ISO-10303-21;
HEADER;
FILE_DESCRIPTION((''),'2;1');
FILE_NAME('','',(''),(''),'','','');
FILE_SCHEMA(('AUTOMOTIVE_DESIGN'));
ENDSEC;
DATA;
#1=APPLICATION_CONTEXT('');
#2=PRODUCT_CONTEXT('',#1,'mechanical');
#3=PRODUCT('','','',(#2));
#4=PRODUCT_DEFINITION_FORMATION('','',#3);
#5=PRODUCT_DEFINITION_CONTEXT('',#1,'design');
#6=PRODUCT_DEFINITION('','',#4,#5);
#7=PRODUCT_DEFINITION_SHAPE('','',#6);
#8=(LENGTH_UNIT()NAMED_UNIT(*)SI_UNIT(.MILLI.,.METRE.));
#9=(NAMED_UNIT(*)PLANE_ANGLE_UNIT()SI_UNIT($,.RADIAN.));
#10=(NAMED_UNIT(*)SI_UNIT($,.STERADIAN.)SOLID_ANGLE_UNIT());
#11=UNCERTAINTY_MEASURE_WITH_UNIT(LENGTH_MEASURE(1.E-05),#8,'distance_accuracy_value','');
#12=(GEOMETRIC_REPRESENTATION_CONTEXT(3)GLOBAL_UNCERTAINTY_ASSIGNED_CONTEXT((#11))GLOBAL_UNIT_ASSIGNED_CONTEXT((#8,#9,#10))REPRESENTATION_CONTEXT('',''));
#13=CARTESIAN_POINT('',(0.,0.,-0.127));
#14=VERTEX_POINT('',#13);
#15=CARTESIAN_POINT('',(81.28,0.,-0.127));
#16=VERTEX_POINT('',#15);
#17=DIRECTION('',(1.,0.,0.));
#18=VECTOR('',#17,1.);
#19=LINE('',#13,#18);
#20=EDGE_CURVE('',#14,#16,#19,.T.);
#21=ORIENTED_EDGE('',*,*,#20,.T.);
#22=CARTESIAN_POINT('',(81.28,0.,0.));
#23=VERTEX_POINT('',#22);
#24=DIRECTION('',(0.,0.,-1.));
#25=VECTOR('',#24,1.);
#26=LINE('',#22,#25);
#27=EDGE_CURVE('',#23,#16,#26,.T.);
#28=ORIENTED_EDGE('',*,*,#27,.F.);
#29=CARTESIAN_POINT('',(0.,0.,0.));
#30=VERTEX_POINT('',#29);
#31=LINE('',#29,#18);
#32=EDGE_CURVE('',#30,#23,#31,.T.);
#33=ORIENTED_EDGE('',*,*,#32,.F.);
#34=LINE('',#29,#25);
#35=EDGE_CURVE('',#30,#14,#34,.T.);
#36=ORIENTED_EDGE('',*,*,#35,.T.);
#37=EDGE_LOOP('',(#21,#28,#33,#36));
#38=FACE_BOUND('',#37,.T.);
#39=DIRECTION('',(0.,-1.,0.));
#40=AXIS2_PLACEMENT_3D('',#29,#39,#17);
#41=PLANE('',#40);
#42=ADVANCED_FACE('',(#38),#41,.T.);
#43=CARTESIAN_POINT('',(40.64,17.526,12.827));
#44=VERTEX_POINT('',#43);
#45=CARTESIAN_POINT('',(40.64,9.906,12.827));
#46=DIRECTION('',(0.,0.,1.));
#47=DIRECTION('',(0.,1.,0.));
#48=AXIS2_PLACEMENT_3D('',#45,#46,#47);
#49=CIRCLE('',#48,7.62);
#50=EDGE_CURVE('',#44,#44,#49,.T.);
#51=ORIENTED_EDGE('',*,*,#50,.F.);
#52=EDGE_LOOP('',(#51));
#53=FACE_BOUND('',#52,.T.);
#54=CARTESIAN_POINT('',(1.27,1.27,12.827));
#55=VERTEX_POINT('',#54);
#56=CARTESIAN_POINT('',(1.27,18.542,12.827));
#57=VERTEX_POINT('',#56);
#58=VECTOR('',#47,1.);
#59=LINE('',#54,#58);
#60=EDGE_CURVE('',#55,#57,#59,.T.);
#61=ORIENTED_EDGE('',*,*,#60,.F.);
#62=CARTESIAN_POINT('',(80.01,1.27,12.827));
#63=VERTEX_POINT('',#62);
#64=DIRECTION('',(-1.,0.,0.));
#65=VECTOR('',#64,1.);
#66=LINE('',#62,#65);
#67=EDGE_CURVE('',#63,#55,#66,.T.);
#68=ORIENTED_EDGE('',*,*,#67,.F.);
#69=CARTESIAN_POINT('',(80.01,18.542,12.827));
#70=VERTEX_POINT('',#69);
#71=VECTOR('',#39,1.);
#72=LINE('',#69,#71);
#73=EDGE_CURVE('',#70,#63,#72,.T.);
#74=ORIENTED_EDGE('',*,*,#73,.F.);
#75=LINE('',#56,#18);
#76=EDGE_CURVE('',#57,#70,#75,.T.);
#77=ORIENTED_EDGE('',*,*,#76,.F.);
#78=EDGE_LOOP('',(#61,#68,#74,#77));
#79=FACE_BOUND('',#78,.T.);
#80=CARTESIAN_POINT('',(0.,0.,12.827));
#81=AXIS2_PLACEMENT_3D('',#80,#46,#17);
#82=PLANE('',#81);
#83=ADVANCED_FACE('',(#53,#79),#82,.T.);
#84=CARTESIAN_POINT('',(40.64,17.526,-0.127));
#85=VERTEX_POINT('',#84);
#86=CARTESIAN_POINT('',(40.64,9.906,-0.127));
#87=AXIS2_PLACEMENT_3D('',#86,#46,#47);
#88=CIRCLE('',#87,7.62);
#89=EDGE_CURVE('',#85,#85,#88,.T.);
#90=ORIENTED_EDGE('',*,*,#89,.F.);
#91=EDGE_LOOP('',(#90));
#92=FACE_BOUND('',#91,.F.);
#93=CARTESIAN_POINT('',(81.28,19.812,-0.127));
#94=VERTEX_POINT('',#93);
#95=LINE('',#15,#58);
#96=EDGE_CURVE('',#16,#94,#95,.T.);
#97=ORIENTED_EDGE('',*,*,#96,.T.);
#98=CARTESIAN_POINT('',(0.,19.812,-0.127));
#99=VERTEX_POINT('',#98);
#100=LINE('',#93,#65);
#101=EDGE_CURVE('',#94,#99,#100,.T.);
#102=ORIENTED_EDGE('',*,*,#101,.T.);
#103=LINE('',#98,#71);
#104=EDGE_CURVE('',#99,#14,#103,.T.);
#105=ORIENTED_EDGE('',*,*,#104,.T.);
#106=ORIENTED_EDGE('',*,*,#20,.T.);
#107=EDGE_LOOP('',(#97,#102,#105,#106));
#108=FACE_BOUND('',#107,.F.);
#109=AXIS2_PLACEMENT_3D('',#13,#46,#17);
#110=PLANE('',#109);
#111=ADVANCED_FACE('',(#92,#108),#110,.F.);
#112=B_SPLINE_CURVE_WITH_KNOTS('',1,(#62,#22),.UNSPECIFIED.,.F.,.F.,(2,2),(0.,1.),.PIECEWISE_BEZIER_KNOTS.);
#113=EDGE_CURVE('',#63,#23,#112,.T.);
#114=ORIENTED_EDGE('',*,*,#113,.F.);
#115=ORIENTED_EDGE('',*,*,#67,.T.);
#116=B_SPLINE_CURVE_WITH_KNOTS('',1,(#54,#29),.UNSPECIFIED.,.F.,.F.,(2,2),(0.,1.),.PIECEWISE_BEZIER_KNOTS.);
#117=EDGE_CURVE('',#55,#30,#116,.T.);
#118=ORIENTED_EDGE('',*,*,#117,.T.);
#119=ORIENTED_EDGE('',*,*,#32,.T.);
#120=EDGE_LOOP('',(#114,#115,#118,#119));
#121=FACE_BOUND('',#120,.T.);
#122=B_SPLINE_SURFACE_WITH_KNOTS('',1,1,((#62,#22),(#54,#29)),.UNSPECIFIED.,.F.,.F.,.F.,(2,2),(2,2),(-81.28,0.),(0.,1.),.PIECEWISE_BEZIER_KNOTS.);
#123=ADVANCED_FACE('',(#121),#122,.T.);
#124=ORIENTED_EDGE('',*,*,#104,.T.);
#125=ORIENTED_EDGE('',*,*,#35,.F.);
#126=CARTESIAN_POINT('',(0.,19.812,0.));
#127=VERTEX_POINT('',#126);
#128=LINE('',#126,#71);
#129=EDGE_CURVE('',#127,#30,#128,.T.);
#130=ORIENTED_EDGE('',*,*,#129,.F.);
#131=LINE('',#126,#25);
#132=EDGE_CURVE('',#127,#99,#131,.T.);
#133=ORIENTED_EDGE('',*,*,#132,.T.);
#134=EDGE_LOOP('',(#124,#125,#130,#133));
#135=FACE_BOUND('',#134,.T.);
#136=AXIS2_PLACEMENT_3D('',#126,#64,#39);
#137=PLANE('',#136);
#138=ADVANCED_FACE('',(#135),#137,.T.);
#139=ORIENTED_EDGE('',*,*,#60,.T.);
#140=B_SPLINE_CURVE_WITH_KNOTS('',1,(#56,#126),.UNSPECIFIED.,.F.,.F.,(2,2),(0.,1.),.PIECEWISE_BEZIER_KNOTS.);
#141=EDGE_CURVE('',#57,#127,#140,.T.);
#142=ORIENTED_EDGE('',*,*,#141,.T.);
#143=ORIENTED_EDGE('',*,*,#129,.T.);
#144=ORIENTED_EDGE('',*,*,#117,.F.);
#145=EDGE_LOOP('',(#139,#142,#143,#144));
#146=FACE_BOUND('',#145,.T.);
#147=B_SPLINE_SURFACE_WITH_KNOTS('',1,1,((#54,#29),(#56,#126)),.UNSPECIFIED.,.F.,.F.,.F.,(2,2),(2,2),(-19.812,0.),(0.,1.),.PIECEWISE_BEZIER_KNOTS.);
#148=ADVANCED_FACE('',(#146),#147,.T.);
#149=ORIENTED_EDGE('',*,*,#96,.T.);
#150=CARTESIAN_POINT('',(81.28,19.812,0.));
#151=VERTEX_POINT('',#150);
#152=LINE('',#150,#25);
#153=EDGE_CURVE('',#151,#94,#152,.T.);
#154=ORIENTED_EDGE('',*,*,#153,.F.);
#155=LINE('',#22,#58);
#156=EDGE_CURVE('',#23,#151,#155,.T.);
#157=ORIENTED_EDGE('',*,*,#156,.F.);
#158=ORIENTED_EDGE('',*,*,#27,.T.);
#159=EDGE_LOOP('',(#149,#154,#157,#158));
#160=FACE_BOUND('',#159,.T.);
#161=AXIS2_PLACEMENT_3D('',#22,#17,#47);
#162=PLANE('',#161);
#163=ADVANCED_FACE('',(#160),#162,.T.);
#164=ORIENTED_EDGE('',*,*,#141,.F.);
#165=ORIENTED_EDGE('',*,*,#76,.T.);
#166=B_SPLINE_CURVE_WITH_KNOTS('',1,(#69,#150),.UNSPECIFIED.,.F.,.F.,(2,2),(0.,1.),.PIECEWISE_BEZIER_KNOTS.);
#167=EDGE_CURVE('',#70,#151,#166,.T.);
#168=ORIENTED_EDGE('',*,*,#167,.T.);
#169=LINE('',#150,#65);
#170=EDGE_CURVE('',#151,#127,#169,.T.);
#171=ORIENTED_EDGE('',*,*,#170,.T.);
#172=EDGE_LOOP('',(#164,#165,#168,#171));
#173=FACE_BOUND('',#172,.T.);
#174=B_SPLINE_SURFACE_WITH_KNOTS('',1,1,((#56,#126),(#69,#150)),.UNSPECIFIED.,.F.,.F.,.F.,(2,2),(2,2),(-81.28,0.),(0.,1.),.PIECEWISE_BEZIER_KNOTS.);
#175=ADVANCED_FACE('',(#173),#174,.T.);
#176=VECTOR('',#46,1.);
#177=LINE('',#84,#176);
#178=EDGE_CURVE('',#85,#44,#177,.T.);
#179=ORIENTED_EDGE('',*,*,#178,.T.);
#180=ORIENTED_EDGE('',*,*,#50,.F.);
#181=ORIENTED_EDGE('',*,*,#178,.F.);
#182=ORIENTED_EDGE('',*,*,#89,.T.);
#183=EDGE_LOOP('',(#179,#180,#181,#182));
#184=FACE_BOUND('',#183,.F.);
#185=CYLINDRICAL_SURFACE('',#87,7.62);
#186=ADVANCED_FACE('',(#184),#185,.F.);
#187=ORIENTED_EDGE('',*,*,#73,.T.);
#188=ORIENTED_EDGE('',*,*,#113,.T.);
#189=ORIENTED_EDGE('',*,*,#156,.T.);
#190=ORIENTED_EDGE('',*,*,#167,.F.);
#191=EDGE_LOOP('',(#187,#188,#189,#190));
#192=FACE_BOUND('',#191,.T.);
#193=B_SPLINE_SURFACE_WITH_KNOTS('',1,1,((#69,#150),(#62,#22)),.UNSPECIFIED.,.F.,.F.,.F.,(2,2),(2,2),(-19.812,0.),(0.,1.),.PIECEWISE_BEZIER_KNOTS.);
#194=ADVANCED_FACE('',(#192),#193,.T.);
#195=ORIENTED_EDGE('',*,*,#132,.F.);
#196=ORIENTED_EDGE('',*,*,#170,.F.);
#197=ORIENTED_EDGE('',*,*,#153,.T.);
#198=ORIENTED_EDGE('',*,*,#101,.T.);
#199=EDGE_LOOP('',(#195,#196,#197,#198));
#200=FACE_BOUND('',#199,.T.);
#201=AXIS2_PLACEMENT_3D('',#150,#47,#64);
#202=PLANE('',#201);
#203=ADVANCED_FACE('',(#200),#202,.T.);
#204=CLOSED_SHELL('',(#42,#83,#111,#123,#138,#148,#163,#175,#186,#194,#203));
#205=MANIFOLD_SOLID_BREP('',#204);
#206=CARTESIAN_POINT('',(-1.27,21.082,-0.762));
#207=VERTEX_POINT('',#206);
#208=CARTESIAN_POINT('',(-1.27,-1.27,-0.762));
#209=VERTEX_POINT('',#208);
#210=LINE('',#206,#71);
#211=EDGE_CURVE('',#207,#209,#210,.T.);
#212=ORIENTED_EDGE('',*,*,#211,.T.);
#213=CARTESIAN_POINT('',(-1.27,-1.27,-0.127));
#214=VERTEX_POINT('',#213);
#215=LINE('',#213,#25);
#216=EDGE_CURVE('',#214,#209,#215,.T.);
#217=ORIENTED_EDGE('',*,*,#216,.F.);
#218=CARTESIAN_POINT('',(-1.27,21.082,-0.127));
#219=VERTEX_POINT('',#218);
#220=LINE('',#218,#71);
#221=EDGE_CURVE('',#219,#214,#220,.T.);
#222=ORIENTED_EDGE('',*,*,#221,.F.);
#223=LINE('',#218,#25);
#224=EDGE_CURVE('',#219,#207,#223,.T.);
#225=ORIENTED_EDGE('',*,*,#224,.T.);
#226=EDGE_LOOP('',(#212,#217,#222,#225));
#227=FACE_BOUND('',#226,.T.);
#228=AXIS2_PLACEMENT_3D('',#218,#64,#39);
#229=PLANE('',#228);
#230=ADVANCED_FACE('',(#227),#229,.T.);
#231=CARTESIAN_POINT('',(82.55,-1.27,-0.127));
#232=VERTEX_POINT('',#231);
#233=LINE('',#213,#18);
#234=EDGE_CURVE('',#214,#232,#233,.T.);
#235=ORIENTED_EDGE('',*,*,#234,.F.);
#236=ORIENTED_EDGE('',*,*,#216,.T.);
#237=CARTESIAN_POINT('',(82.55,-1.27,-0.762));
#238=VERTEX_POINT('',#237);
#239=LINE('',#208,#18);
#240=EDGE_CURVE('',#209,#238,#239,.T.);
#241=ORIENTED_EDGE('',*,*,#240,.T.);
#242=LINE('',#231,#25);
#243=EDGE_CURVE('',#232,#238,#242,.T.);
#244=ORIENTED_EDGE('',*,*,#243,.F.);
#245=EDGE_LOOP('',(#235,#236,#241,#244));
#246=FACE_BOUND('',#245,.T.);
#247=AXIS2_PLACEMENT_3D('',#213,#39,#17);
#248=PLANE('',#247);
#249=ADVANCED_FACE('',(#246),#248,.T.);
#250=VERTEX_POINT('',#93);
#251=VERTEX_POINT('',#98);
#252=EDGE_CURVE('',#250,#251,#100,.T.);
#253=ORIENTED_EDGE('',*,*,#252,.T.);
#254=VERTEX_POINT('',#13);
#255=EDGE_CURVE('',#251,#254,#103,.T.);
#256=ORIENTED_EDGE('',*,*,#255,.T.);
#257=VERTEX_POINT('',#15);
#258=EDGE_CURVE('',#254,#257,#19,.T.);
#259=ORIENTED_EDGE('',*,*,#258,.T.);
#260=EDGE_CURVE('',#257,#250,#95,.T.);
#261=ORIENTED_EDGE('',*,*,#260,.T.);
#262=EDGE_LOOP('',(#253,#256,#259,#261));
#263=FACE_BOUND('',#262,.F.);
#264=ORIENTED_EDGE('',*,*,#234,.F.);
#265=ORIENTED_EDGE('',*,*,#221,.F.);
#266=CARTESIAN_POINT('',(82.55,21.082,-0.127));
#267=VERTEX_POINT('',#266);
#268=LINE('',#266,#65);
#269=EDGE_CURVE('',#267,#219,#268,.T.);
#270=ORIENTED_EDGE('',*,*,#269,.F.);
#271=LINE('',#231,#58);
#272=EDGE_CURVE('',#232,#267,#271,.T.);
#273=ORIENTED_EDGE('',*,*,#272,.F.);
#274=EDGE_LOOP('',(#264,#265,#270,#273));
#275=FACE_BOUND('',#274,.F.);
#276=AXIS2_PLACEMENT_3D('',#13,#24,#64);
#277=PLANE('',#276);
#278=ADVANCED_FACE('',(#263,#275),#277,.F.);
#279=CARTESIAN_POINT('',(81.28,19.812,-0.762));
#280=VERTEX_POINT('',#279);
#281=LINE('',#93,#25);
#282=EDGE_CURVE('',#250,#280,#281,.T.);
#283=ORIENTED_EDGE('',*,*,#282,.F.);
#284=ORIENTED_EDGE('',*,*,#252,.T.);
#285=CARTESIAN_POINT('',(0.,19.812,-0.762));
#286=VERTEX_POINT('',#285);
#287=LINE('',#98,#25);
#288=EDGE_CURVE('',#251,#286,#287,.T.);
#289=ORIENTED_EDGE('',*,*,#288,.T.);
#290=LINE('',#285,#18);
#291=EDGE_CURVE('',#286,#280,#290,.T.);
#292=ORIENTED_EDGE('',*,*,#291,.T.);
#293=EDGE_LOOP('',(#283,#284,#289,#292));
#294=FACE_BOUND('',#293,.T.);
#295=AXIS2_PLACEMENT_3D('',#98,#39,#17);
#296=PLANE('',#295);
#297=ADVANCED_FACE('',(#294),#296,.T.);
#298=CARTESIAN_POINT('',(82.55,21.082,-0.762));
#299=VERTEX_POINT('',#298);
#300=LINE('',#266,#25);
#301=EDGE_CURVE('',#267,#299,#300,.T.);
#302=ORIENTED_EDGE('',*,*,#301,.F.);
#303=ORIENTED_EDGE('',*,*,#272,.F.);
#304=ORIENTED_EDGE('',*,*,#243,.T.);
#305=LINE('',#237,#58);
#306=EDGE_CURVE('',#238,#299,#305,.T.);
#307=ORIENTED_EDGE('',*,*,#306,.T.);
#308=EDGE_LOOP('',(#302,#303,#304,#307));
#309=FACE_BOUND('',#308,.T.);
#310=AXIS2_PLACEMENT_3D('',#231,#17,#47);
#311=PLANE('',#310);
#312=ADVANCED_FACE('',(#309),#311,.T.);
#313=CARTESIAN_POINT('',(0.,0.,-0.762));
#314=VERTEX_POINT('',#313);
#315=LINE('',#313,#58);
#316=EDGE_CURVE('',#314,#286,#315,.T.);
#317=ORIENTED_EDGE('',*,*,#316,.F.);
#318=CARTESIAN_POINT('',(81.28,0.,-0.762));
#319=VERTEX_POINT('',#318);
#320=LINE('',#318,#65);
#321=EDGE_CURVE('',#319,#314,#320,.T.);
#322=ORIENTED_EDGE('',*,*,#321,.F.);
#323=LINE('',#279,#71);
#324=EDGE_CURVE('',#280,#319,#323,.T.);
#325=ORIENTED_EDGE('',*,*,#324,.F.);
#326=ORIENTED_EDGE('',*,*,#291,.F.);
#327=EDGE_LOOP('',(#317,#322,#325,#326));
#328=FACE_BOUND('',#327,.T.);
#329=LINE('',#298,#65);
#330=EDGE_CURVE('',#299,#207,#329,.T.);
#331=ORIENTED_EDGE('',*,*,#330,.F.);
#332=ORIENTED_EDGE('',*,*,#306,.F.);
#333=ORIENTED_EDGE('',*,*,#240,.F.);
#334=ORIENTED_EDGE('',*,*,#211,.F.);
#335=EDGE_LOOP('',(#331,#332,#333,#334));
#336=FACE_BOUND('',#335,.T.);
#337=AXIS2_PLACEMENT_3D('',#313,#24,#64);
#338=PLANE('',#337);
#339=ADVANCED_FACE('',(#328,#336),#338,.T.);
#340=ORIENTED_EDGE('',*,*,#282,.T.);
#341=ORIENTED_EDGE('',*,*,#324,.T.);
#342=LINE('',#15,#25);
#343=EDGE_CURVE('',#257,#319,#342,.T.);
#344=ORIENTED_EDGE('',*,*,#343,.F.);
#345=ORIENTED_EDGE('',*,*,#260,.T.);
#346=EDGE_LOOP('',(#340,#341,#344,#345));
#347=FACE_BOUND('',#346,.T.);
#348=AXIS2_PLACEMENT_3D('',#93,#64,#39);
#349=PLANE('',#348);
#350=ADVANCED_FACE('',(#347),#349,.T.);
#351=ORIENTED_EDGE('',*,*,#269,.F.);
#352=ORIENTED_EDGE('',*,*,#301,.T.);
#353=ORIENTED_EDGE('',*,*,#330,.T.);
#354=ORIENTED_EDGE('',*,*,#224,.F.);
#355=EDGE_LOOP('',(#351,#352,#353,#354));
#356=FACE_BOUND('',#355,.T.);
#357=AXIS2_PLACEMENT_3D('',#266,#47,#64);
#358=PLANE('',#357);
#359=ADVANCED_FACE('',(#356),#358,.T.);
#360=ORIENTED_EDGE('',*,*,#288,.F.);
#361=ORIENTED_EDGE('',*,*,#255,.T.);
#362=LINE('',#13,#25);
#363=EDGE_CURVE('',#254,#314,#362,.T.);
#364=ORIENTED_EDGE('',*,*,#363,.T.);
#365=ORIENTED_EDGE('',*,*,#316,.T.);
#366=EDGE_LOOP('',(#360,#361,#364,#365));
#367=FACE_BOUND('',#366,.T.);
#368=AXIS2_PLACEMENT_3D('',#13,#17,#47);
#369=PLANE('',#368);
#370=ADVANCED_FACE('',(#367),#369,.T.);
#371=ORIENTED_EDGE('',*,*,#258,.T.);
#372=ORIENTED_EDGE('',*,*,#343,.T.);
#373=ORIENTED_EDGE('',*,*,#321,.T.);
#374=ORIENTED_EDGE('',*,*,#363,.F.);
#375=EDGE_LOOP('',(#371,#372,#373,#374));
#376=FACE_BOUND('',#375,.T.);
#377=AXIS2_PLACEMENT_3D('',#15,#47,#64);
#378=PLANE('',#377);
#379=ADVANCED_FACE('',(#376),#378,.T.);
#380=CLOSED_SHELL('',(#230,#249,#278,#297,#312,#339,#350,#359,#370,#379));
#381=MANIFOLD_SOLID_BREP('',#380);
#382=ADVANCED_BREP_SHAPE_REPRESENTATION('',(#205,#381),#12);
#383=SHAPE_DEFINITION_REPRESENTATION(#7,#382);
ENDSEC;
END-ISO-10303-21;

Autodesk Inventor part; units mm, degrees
ref_plane "YZ Plane" through (0, 0, 0) normal (1, 0, 0) x (0, 1, 0)
ref_plane "XZ Plane" through (0, 0, 0) normal (0, 1, 0) x (-1, 0, 0)
sketch "Sketch1" plane through (0, 0, 0) normal (0, 0, 1) x (1, 0, 0)
  line L0 (0, 0) -> (81.28, 0)
  line L1 (81.28, 0) -> (81.28, 19.812)
  line L2 (81.28, 19.812) -> (0, 19.812)
  line L3 (0, 19.812) -> (0, 0)
  dimension "d0" = 81.28
  dimension "d1" = 19.812
extrude "Extrusion1" add sketch "Sketch1" against normal blind 0.127
ref_plane "Work Plane1" through (0, 0, 12.7) normal (0, 0, 1) x (1, 0, 0)
sketch "Sketch2" plane through (0, 0, 12.7) normal (0, 0, 1) x (1, 0, 0)
  line L0 (0, 0) -> (81.28, 0) projected
  line L1 (81.28, 0) -> (81.28, 19.812) projected
  line L2 (81.28, 19.812) -> (0, 19.812) projected
  line L3 (0, 19.812) -> (0, 0) projected
  line L4 (1.27, 18.542) -> (80.01, 18.542)
  line L5 (80.01, 18.542) -> (80.01, 1.27)
  line L6 (80.01, 1.27) -> (1.27, 1.27)
  line L7 (1.27, 1.27) -> (1.27, 18.542)
  dimension "d5" = 1.27
extrude "Extrusion2" add sketch "Sketch2" along normal blind 0.127 contours L4 L5 L6 L7
loft "Loft1" add section 1 edges at (40.64, 18.542, 12.827) (1.27, 9.906, 12.827) (40.64, 1.27, 12.827) (80.01, 9.906, 12.827) section 2 edges at (40.64, 0, 0) (81.28, 9.906, 0) (40.64, 19.812, 0) (0, 9.906, 0)
sketch "Sketch3" plane through (0, 0, -0.127) normal (0, 0, -1) x (-1, 0, 0)
  line L0 (0, 19.812) -> (-81.28, 19.812) projected
  line L1 (0, 0) -> (0, 19.812) projected
  line L2 (-81.28, 0) -> (0, 0) projected
  line L3 (-81.28, 19.812) -> (-81.28, 0) projected
  line L4 (-82.55, 21.082) -> (1.27, 21.082)
  line L5 (1.27, 21.082) -> (1.27, -1.27)
  line L6 (1.27, -1.27) -> (-82.55, -1.27)
  line L7 (-82.55, -1.27) -> (-82.55, 21.082)
  circle A0 centre (-40.64, 9.906) radius 7.62
  dimension "d12" = 1.27
  dimension "d15" = 15.24
extrude "Extrusion3" add sketch "Sketch3" along normal blind 0.635 contours L4 L5 L6 L7
hole "Hole1" at (40.64, 9.906, -0.127) direction (0, 0, 1) diameter 15.24 end through all
properties part number "doorlatchkeeperopener"
